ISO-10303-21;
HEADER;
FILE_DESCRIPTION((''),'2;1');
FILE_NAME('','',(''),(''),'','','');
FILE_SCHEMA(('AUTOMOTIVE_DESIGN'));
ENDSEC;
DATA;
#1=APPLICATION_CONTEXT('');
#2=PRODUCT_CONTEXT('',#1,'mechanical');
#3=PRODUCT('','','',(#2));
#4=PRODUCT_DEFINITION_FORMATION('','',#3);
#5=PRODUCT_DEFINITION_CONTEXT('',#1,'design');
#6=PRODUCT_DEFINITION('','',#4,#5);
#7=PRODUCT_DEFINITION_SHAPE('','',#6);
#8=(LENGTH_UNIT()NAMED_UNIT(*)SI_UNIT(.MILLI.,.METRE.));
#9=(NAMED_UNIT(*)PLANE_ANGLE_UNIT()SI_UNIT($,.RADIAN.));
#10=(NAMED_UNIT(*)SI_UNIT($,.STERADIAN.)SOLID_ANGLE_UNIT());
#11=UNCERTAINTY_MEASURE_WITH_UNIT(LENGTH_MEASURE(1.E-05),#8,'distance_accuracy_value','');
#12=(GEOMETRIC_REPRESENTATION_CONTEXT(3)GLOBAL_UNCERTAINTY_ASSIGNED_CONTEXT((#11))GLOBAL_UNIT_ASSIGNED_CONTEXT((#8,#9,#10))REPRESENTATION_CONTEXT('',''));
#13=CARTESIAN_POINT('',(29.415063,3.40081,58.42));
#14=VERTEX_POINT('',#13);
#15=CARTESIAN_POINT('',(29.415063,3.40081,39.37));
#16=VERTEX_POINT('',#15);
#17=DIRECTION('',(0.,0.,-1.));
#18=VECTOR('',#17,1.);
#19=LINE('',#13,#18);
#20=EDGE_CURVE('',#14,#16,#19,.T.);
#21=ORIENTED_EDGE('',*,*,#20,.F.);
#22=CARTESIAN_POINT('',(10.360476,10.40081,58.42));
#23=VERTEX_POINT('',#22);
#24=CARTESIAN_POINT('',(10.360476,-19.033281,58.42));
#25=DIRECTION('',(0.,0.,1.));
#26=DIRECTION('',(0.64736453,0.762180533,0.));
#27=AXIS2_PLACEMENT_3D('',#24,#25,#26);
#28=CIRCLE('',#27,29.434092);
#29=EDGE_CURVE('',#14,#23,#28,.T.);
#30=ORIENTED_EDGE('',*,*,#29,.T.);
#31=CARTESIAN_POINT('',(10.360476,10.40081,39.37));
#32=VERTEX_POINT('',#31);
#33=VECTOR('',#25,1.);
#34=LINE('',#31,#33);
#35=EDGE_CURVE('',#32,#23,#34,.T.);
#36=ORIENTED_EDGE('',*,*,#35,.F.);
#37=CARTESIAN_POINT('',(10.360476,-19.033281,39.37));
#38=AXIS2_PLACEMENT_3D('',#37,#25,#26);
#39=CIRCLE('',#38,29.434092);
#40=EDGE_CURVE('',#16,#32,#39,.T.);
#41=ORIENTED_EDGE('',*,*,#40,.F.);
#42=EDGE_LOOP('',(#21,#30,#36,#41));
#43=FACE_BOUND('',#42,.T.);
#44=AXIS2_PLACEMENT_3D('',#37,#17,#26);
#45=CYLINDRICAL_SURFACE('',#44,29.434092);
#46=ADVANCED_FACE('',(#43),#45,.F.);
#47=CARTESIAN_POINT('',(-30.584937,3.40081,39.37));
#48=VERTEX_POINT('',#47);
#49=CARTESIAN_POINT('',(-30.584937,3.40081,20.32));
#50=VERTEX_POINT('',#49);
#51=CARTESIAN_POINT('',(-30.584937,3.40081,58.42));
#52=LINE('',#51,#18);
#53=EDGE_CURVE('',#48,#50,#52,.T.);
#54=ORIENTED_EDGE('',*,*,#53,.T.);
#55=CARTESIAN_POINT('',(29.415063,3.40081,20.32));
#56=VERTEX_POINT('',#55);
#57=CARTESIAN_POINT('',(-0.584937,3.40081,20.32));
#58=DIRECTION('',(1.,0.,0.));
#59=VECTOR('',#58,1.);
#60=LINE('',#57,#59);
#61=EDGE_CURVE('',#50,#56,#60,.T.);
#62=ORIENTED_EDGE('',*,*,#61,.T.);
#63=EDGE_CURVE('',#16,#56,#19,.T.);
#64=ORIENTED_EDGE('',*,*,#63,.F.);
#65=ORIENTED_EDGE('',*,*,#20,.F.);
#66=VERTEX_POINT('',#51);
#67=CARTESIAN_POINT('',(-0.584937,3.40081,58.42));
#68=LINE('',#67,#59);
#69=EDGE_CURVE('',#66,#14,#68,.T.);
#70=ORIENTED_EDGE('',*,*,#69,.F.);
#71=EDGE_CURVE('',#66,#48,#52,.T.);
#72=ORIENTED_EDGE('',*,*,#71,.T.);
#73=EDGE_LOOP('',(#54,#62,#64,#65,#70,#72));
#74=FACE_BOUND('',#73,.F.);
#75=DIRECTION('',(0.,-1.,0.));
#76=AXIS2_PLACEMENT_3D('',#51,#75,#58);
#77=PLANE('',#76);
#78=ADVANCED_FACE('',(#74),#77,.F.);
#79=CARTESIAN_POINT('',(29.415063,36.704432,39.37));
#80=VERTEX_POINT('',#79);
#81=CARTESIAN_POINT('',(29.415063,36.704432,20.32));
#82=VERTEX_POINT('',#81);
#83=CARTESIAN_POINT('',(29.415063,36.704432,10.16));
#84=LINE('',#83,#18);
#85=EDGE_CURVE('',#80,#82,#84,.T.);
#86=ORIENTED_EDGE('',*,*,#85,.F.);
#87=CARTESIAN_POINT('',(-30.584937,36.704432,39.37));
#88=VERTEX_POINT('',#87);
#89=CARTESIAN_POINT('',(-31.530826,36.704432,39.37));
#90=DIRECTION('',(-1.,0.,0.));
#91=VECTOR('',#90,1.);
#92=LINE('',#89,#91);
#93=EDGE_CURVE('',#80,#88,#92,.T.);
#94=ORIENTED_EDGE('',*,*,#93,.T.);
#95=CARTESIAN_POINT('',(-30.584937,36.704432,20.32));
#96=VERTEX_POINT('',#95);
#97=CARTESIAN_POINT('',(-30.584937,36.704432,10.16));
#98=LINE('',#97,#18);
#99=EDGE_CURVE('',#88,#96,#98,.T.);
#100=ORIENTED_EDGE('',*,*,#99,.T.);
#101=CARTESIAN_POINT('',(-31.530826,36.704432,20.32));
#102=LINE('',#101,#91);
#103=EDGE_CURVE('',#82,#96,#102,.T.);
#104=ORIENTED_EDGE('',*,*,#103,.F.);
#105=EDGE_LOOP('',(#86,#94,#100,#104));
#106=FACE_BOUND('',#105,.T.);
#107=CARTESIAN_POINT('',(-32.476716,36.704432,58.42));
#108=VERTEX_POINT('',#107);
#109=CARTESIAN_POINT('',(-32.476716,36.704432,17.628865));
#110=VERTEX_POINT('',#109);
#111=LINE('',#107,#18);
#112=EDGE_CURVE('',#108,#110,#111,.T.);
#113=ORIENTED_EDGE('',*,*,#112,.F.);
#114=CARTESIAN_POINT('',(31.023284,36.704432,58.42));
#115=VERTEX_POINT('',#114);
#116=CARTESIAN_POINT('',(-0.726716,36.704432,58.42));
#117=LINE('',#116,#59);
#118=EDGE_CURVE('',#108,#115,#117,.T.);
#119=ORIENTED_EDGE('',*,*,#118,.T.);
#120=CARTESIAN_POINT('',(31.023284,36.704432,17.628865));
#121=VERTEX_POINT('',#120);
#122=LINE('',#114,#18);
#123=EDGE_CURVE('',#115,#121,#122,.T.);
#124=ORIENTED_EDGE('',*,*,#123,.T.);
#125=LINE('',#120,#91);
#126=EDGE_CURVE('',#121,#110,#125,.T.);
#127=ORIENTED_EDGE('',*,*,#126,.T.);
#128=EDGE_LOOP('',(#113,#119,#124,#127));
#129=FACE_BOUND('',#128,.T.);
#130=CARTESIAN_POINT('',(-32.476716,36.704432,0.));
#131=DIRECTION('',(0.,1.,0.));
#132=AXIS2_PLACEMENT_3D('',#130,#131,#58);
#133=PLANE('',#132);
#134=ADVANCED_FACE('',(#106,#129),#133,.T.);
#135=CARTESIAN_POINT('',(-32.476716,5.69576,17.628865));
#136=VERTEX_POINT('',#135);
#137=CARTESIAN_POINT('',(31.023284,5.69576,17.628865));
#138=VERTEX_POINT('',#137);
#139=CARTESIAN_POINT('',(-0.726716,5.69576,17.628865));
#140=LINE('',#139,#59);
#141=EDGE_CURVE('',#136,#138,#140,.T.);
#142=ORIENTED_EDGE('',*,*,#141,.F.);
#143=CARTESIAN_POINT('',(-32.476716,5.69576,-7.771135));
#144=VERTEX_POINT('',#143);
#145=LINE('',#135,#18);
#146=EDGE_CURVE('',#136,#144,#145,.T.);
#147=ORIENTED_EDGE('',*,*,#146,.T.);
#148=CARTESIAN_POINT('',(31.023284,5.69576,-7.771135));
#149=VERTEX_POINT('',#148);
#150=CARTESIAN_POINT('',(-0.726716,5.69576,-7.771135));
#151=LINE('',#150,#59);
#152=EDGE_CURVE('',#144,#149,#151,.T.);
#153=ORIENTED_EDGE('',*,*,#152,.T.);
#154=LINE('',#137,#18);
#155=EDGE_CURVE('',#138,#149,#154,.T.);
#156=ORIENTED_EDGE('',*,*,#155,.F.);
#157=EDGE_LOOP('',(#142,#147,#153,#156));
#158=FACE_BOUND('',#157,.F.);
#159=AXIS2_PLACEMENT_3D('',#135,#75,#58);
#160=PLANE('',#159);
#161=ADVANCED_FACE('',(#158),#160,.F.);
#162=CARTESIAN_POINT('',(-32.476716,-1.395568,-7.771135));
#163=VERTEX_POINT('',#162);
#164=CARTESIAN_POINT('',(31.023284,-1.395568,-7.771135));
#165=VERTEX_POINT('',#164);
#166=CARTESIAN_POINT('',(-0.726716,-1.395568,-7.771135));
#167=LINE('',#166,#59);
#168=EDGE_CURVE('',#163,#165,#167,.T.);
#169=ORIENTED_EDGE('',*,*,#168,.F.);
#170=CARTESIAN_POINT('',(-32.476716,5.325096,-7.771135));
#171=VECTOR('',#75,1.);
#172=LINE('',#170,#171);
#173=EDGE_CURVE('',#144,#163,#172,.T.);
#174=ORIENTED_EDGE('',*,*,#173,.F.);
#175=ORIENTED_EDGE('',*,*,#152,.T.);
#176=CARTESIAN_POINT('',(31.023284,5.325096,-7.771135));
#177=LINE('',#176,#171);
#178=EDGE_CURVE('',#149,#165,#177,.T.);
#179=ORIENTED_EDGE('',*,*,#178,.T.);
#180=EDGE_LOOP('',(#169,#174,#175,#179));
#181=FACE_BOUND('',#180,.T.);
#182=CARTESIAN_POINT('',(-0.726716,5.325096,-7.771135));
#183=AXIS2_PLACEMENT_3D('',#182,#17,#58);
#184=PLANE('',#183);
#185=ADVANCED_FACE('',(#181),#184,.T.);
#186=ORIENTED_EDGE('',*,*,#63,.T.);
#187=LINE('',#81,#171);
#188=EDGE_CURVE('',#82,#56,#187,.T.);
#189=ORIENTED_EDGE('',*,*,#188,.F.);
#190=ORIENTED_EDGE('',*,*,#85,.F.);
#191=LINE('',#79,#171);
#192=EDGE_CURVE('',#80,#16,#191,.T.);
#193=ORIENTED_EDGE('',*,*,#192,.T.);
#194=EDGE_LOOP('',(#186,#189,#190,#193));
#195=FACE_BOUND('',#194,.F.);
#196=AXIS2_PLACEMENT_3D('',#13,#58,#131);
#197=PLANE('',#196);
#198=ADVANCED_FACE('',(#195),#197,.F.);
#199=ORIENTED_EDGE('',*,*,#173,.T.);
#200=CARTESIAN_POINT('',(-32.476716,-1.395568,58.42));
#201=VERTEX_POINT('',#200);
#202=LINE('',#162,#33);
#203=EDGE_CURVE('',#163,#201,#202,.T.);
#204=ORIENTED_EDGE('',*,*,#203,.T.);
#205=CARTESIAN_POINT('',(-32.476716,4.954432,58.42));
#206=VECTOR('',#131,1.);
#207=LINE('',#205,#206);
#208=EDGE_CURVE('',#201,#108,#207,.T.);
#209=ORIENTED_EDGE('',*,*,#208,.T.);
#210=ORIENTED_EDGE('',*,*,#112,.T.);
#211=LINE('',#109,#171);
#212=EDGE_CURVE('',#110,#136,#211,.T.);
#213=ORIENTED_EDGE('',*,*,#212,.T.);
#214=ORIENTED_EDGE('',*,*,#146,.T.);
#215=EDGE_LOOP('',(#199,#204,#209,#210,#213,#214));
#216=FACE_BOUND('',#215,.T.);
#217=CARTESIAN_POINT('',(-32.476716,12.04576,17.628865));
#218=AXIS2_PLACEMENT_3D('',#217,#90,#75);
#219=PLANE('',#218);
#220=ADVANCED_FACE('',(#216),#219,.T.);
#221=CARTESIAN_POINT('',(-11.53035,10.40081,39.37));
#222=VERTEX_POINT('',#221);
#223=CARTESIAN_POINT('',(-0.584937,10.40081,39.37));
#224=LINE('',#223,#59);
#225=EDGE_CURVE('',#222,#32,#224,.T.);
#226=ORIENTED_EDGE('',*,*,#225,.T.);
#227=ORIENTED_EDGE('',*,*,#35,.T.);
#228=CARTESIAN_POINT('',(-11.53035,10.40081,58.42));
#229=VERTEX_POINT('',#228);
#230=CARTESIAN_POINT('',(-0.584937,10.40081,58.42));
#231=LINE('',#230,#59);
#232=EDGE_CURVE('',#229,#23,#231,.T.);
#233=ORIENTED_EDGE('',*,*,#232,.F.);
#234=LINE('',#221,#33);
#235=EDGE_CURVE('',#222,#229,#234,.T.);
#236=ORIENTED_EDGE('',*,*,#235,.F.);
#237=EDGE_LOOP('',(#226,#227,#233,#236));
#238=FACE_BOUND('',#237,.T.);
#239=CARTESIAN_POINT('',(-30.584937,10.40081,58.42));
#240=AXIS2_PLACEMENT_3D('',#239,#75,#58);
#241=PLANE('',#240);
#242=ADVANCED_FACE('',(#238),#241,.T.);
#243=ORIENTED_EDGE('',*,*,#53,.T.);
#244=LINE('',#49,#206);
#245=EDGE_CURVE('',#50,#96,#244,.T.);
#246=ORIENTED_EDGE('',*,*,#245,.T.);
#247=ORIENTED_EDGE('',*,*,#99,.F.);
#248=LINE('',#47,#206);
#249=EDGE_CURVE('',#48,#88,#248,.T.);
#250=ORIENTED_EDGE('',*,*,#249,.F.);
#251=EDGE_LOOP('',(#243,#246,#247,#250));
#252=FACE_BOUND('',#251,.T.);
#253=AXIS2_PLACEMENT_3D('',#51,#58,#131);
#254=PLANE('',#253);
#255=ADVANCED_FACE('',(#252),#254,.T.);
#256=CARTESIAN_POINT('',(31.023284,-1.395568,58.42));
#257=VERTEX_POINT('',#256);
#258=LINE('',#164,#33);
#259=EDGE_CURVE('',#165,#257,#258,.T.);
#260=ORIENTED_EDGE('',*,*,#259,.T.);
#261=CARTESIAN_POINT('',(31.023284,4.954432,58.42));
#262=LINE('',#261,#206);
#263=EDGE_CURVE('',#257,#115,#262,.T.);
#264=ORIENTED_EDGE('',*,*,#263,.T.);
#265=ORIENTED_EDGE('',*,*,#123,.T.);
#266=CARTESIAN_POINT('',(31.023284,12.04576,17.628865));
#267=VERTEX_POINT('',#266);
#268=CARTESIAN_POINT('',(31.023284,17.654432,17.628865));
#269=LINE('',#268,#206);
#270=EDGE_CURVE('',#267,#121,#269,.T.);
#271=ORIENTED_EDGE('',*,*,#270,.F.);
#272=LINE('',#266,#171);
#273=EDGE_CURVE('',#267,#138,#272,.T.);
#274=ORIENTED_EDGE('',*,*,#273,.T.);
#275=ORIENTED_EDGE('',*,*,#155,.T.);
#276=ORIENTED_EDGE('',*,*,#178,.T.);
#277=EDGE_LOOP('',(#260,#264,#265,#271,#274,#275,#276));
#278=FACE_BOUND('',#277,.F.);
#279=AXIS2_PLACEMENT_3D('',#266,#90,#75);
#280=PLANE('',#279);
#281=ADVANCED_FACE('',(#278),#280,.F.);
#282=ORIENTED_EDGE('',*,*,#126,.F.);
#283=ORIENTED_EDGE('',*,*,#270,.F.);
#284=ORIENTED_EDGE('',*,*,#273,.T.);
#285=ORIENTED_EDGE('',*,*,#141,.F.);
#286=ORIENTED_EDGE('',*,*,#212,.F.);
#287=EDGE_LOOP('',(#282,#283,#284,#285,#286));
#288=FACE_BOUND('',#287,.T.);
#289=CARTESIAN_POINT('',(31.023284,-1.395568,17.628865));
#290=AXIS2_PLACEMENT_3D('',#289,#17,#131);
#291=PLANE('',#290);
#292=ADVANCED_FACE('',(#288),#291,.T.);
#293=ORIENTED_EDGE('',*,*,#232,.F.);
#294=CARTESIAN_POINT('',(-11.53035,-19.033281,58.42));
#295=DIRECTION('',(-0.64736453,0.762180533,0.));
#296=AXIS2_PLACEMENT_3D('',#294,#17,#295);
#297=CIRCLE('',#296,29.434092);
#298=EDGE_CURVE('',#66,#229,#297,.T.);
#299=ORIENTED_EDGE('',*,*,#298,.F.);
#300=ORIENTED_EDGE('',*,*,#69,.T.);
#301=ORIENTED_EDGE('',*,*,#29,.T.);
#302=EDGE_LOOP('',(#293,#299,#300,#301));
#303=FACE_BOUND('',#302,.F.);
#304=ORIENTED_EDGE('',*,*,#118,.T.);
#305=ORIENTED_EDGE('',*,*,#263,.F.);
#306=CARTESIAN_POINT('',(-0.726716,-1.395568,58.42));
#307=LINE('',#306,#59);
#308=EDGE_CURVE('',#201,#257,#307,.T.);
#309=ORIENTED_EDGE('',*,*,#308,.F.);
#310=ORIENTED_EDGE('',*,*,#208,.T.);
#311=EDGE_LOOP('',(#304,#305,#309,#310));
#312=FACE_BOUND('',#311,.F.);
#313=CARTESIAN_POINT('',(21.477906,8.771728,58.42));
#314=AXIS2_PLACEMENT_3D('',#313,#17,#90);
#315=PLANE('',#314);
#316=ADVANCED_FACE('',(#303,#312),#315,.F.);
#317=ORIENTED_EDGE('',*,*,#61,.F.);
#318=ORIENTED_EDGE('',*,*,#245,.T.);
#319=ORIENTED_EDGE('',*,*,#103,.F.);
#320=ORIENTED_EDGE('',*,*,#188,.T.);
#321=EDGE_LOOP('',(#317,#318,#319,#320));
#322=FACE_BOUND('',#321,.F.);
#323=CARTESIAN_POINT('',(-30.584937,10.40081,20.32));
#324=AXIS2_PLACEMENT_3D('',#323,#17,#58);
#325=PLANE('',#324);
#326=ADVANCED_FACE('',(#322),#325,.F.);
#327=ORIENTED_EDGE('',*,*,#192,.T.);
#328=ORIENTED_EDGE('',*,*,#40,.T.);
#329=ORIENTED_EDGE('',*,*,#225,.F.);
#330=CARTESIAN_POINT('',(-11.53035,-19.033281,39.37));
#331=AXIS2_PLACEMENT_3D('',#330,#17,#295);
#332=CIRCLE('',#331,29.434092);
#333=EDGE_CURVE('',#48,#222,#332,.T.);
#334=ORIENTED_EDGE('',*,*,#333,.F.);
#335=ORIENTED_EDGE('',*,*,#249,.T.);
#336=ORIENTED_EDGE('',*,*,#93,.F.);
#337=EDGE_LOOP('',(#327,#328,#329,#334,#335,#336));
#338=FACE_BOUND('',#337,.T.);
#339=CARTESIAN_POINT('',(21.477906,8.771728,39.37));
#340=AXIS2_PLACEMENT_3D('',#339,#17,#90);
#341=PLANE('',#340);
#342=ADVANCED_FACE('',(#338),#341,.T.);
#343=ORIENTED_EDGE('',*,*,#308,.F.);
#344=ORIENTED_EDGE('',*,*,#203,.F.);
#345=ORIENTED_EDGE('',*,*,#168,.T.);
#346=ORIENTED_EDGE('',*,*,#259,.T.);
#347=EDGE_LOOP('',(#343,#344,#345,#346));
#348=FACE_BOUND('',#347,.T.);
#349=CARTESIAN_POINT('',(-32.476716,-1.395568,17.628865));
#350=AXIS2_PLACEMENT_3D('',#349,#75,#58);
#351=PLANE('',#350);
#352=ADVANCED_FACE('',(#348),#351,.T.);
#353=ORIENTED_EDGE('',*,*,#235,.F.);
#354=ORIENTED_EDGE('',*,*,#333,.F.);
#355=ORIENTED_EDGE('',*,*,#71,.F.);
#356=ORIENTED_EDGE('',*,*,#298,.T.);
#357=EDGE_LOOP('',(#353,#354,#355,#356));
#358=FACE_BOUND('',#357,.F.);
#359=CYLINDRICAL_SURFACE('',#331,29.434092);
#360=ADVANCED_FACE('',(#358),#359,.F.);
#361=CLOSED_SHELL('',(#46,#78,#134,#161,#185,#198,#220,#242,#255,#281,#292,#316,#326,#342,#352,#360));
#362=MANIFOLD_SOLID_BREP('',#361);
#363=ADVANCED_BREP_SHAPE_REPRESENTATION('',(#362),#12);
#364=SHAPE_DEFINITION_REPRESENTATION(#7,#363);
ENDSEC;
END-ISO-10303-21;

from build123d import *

# Parameters (mm, degrees)
F0_W         = 63.5
F0_H         = 63.5
F1_DEPTH     = 38.1
F2_DEPTH     = 58.42
F3_W         = 60
F3_H         = 7
F4_DEPTH     = 38.1
F5_W         = 60
F5_H         = 19.05
F6_DEPTH     = 50.8
F7_DEPTH     = 25.4
F8_W         = 38.1
F8_H         = 17.6288653165
F9_DEPTH     = 76.2
F10_T1_DEPTH = 19.05
F11_W        = 63.5
F11_H        = 13.4413276523
F12_DEPTH    = 25.4
F13_DEPTH    = 6.35


# Not quite as in the source:
# - a fillet or chamfer that OpenCascade refuses, or shapes differently, is made with other operations: its cross-section is extruded or revolved along the edge and cut away or added


with BuildPart() as f1:
    # F0 (on Top) → F1 (new body)
    with BuildSketch(Plane.XY):
        with Locations((-0.7267157435, 4.9544320554)):
            Rectangle(F0_W, F0_H)
    extrude(amount=F1_DEPTH)

    # F0 (on Top) → F2 (join)
    with BuildSketch(Plane.XY):
        with Locations((-0.7267157435, 4.9544320554)):
            Rectangle(F0_W, F0_H)
    extrude(amount=F2_DEPTH)

    # F3 (on face) → F4 (cut)
    with BuildSketch(Plane.XY.offset(58.42)):
        with Locations((-0.5849367008, 6.9008102814)):
            Rectangle(F3_W, F3_H)
    extrude(amount=-F4_DEPTH, mode=Mode.SUBTRACT)

    # F5 (on face) → F6 (cut)
    with BuildSketch(Plane.XZ.offset(-10.4008102814)):
        with Locations((-0.5849367008, 29.845)):
            Rectangle(F5_W, F5_H)
    extrude(amount=-F6_DEPTH, mode=Mode.SUBTRACT)

    # F7 (cut): a face of the model
    f7_faces = [f1.faces().sort_by_distance(p)[0] for p in [
        (-0.7267157435, -26.7955679446, 29.21),
    ]]
    extrude(f7_faces, amount=-F7_DEPTH, mode=Mode.SUBTRACT)

    # F8 (on face) → F9 (cut)
    with BuildSketch(Plane.YZ.offset(31.0232842565)):
        with Locations((17.6544320554, 8.8144326583)):
            Rectangle(F8_W, F8_H)
    extrude(amount=-F9_DEPTH, mode=Mode.SUBTRACT)

    # F10: fillet of radius 29.4340917525 on 2 edges, made by hand

    # F10_s2 → F10_t1 (join)
    with BuildSketch(Plane.XY.offset(39.37)):
        with BuildLine():
            ThreePointArc((29.4150632992, 3.4008102814), (20.5103197353, 8.5954433667), (10.3604763309, 10.4008102814))
            Line((10.3604763309, 10.4008102814), (29.4150632992, 10.4008102814))
            Line((29.4150632992, 10.4008102814), (29.4150632992, 3.4008102814))
        make_face()
        with BuildLine():
            ThreePointArc((-30.5849367008, 3.4008102814), (-21.6801931368, 8.5954433667), (-11.5303497324, 10.4008102814))
            Line((-11.5303497324, 10.4008102814), (-30.5849367008, 10.4008102814))
            Line((-30.5849367008, 10.4008102814), (-30.5849367008, 3.4008102814))
        make_face()
    extrude(amount=F10_T1_DEPTH)

    # F11 (on face) → F12 (join)
    with BuildSketch(Plane(origin=(0, 0, 17.6288653165), x_dir=(1, 0, 0), z_dir=(0, 0, -1))):
        with Locations((-0.7267157435, -5.3250958815)):
            Rectangle(F11_W, F11_H)
    extrude(amount=F12_DEPTH)

    # F13 (cut): a face of the model
    f13_faces = [f1.faces().sort_by_distance(p)[0] for p in [
        (-0.7267157435, 12.0457597077, 4.9288653165),
    ]]
    extrude(f13_faces, amount=-F13_DEPTH, mode=Mode.SUBTRACT)


solid = f1.part
